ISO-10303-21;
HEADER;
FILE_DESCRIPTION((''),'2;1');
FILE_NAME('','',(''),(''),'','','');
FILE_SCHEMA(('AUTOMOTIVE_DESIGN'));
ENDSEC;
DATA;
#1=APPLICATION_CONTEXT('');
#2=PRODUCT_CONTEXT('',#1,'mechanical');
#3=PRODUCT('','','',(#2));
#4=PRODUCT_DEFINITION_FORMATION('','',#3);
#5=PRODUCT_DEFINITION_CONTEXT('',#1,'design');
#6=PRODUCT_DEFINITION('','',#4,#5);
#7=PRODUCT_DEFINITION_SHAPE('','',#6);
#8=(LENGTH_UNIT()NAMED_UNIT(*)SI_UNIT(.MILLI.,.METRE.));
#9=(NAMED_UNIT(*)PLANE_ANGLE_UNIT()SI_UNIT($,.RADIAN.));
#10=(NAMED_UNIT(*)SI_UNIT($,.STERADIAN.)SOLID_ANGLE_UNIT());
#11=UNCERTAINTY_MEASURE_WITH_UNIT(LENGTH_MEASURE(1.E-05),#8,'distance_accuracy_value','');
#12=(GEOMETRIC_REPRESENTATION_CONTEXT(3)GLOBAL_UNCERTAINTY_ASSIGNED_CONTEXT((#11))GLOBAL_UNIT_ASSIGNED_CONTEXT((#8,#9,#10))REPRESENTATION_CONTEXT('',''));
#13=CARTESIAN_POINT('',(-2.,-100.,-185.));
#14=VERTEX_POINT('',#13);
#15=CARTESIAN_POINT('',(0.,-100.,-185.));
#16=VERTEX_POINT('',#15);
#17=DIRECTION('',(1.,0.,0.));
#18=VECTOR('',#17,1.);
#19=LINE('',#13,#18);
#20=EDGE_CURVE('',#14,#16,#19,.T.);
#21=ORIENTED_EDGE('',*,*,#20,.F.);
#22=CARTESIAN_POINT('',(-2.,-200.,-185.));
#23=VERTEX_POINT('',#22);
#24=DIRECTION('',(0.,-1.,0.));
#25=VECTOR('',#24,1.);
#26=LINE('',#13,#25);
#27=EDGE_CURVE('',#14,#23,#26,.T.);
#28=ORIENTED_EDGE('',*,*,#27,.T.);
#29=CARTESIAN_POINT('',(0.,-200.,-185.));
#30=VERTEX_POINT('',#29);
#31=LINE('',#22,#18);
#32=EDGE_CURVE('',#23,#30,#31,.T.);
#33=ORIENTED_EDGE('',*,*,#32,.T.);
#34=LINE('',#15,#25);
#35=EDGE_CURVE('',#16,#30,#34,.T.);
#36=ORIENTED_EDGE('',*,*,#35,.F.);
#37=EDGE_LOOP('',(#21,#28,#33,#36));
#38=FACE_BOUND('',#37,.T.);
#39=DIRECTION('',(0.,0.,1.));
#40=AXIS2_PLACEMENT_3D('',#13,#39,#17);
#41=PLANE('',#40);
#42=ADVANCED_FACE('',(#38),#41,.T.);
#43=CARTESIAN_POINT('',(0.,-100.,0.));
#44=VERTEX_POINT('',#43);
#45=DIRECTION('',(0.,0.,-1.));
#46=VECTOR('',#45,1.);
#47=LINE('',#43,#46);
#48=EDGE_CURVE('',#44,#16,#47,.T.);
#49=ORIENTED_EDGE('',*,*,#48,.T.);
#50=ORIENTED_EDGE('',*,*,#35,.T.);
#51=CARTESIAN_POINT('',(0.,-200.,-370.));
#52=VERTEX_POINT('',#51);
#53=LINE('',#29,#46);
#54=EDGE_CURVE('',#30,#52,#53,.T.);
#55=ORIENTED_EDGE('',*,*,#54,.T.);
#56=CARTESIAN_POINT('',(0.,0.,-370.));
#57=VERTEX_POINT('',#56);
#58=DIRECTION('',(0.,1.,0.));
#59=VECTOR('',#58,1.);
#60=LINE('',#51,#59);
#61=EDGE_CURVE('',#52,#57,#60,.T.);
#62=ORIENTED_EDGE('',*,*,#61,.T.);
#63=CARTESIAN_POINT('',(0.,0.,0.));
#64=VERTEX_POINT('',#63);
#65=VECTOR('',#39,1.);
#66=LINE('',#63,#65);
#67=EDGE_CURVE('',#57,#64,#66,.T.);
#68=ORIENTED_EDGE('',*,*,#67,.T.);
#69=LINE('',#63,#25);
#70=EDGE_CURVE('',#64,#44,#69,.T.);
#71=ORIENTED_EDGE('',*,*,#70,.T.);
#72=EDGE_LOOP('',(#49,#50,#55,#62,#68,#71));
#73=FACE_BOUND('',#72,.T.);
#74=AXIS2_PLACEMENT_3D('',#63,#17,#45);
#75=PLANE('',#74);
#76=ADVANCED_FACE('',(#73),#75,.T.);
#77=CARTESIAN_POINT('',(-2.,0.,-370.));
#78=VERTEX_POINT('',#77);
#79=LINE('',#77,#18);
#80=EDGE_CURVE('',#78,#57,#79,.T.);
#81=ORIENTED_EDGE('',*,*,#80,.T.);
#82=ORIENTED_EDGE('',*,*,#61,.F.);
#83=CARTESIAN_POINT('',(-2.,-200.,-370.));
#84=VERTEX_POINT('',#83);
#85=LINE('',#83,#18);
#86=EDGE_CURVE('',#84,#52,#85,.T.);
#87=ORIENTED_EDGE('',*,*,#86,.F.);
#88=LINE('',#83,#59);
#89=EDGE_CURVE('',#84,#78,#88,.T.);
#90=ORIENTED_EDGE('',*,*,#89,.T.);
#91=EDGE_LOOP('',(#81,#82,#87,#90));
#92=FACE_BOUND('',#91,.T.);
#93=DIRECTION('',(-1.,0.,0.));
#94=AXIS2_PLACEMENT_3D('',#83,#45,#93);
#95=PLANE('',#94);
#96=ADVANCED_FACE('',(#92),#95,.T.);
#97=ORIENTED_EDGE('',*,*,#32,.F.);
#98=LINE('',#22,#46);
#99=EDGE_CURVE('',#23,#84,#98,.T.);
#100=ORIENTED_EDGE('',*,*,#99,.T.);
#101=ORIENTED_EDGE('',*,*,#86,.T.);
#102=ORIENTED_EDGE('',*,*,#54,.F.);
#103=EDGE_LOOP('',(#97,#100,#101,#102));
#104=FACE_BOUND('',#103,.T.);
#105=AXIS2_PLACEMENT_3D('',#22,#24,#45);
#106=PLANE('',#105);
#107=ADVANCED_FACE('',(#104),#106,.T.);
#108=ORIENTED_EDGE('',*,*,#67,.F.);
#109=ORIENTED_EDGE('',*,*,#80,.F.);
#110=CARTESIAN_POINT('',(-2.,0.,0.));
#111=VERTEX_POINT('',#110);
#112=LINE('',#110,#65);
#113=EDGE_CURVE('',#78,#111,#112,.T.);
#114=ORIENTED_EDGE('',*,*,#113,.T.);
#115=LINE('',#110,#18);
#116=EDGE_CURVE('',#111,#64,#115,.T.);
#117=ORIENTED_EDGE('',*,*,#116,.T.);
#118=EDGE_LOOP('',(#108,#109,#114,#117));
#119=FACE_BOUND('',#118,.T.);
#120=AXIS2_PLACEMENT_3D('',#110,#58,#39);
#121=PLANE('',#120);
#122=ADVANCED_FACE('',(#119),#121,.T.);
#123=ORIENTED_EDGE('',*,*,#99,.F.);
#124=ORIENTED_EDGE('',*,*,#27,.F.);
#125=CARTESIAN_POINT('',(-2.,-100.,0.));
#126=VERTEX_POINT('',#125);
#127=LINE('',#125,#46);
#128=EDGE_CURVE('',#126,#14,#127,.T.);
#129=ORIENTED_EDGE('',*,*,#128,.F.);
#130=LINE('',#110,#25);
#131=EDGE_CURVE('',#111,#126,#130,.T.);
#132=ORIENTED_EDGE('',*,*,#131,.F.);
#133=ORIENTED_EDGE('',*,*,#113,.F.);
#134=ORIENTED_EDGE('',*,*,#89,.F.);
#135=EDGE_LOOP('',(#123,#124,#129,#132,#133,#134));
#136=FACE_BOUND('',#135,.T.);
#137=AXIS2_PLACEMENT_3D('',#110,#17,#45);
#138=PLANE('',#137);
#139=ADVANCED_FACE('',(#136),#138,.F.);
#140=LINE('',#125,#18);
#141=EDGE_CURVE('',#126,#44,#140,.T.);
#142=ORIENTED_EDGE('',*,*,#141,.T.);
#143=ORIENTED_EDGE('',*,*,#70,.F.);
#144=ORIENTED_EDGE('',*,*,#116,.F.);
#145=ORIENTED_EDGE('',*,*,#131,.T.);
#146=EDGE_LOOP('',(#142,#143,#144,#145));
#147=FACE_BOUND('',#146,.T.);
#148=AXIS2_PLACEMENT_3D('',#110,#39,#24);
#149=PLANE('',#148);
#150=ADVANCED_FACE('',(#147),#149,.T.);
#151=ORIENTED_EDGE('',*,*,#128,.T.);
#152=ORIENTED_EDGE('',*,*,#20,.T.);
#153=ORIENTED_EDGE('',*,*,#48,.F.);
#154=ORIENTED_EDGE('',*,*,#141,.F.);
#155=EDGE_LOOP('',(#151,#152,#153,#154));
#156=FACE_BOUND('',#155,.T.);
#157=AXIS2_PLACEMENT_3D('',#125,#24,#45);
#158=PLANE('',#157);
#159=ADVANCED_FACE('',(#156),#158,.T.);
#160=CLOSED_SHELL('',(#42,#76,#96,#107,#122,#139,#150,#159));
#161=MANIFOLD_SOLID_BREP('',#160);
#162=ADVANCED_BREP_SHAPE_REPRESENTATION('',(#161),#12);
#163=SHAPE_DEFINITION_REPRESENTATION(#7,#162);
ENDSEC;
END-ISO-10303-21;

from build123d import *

# Parameters (mm, degrees)
BASE_FLANGE1_DEPTH = 2


# Sheet-metal steps are written as plain solids
with BuildPart() as part:
    # Sketch1 → Base-Flange1 (new body)
    with BuildSketch(Plane(origin=(0, 0, 0), x_dir=(0, 0, -1), z_dir=(1, 0, 0))):
        Polygon((0, 0), (0, -100), (185, -100), (185, -200), (370, -200), (370, 0), align=None)
    extrude(amount=-BASE_FLANGE1_DEPTH)


solid = part.part
